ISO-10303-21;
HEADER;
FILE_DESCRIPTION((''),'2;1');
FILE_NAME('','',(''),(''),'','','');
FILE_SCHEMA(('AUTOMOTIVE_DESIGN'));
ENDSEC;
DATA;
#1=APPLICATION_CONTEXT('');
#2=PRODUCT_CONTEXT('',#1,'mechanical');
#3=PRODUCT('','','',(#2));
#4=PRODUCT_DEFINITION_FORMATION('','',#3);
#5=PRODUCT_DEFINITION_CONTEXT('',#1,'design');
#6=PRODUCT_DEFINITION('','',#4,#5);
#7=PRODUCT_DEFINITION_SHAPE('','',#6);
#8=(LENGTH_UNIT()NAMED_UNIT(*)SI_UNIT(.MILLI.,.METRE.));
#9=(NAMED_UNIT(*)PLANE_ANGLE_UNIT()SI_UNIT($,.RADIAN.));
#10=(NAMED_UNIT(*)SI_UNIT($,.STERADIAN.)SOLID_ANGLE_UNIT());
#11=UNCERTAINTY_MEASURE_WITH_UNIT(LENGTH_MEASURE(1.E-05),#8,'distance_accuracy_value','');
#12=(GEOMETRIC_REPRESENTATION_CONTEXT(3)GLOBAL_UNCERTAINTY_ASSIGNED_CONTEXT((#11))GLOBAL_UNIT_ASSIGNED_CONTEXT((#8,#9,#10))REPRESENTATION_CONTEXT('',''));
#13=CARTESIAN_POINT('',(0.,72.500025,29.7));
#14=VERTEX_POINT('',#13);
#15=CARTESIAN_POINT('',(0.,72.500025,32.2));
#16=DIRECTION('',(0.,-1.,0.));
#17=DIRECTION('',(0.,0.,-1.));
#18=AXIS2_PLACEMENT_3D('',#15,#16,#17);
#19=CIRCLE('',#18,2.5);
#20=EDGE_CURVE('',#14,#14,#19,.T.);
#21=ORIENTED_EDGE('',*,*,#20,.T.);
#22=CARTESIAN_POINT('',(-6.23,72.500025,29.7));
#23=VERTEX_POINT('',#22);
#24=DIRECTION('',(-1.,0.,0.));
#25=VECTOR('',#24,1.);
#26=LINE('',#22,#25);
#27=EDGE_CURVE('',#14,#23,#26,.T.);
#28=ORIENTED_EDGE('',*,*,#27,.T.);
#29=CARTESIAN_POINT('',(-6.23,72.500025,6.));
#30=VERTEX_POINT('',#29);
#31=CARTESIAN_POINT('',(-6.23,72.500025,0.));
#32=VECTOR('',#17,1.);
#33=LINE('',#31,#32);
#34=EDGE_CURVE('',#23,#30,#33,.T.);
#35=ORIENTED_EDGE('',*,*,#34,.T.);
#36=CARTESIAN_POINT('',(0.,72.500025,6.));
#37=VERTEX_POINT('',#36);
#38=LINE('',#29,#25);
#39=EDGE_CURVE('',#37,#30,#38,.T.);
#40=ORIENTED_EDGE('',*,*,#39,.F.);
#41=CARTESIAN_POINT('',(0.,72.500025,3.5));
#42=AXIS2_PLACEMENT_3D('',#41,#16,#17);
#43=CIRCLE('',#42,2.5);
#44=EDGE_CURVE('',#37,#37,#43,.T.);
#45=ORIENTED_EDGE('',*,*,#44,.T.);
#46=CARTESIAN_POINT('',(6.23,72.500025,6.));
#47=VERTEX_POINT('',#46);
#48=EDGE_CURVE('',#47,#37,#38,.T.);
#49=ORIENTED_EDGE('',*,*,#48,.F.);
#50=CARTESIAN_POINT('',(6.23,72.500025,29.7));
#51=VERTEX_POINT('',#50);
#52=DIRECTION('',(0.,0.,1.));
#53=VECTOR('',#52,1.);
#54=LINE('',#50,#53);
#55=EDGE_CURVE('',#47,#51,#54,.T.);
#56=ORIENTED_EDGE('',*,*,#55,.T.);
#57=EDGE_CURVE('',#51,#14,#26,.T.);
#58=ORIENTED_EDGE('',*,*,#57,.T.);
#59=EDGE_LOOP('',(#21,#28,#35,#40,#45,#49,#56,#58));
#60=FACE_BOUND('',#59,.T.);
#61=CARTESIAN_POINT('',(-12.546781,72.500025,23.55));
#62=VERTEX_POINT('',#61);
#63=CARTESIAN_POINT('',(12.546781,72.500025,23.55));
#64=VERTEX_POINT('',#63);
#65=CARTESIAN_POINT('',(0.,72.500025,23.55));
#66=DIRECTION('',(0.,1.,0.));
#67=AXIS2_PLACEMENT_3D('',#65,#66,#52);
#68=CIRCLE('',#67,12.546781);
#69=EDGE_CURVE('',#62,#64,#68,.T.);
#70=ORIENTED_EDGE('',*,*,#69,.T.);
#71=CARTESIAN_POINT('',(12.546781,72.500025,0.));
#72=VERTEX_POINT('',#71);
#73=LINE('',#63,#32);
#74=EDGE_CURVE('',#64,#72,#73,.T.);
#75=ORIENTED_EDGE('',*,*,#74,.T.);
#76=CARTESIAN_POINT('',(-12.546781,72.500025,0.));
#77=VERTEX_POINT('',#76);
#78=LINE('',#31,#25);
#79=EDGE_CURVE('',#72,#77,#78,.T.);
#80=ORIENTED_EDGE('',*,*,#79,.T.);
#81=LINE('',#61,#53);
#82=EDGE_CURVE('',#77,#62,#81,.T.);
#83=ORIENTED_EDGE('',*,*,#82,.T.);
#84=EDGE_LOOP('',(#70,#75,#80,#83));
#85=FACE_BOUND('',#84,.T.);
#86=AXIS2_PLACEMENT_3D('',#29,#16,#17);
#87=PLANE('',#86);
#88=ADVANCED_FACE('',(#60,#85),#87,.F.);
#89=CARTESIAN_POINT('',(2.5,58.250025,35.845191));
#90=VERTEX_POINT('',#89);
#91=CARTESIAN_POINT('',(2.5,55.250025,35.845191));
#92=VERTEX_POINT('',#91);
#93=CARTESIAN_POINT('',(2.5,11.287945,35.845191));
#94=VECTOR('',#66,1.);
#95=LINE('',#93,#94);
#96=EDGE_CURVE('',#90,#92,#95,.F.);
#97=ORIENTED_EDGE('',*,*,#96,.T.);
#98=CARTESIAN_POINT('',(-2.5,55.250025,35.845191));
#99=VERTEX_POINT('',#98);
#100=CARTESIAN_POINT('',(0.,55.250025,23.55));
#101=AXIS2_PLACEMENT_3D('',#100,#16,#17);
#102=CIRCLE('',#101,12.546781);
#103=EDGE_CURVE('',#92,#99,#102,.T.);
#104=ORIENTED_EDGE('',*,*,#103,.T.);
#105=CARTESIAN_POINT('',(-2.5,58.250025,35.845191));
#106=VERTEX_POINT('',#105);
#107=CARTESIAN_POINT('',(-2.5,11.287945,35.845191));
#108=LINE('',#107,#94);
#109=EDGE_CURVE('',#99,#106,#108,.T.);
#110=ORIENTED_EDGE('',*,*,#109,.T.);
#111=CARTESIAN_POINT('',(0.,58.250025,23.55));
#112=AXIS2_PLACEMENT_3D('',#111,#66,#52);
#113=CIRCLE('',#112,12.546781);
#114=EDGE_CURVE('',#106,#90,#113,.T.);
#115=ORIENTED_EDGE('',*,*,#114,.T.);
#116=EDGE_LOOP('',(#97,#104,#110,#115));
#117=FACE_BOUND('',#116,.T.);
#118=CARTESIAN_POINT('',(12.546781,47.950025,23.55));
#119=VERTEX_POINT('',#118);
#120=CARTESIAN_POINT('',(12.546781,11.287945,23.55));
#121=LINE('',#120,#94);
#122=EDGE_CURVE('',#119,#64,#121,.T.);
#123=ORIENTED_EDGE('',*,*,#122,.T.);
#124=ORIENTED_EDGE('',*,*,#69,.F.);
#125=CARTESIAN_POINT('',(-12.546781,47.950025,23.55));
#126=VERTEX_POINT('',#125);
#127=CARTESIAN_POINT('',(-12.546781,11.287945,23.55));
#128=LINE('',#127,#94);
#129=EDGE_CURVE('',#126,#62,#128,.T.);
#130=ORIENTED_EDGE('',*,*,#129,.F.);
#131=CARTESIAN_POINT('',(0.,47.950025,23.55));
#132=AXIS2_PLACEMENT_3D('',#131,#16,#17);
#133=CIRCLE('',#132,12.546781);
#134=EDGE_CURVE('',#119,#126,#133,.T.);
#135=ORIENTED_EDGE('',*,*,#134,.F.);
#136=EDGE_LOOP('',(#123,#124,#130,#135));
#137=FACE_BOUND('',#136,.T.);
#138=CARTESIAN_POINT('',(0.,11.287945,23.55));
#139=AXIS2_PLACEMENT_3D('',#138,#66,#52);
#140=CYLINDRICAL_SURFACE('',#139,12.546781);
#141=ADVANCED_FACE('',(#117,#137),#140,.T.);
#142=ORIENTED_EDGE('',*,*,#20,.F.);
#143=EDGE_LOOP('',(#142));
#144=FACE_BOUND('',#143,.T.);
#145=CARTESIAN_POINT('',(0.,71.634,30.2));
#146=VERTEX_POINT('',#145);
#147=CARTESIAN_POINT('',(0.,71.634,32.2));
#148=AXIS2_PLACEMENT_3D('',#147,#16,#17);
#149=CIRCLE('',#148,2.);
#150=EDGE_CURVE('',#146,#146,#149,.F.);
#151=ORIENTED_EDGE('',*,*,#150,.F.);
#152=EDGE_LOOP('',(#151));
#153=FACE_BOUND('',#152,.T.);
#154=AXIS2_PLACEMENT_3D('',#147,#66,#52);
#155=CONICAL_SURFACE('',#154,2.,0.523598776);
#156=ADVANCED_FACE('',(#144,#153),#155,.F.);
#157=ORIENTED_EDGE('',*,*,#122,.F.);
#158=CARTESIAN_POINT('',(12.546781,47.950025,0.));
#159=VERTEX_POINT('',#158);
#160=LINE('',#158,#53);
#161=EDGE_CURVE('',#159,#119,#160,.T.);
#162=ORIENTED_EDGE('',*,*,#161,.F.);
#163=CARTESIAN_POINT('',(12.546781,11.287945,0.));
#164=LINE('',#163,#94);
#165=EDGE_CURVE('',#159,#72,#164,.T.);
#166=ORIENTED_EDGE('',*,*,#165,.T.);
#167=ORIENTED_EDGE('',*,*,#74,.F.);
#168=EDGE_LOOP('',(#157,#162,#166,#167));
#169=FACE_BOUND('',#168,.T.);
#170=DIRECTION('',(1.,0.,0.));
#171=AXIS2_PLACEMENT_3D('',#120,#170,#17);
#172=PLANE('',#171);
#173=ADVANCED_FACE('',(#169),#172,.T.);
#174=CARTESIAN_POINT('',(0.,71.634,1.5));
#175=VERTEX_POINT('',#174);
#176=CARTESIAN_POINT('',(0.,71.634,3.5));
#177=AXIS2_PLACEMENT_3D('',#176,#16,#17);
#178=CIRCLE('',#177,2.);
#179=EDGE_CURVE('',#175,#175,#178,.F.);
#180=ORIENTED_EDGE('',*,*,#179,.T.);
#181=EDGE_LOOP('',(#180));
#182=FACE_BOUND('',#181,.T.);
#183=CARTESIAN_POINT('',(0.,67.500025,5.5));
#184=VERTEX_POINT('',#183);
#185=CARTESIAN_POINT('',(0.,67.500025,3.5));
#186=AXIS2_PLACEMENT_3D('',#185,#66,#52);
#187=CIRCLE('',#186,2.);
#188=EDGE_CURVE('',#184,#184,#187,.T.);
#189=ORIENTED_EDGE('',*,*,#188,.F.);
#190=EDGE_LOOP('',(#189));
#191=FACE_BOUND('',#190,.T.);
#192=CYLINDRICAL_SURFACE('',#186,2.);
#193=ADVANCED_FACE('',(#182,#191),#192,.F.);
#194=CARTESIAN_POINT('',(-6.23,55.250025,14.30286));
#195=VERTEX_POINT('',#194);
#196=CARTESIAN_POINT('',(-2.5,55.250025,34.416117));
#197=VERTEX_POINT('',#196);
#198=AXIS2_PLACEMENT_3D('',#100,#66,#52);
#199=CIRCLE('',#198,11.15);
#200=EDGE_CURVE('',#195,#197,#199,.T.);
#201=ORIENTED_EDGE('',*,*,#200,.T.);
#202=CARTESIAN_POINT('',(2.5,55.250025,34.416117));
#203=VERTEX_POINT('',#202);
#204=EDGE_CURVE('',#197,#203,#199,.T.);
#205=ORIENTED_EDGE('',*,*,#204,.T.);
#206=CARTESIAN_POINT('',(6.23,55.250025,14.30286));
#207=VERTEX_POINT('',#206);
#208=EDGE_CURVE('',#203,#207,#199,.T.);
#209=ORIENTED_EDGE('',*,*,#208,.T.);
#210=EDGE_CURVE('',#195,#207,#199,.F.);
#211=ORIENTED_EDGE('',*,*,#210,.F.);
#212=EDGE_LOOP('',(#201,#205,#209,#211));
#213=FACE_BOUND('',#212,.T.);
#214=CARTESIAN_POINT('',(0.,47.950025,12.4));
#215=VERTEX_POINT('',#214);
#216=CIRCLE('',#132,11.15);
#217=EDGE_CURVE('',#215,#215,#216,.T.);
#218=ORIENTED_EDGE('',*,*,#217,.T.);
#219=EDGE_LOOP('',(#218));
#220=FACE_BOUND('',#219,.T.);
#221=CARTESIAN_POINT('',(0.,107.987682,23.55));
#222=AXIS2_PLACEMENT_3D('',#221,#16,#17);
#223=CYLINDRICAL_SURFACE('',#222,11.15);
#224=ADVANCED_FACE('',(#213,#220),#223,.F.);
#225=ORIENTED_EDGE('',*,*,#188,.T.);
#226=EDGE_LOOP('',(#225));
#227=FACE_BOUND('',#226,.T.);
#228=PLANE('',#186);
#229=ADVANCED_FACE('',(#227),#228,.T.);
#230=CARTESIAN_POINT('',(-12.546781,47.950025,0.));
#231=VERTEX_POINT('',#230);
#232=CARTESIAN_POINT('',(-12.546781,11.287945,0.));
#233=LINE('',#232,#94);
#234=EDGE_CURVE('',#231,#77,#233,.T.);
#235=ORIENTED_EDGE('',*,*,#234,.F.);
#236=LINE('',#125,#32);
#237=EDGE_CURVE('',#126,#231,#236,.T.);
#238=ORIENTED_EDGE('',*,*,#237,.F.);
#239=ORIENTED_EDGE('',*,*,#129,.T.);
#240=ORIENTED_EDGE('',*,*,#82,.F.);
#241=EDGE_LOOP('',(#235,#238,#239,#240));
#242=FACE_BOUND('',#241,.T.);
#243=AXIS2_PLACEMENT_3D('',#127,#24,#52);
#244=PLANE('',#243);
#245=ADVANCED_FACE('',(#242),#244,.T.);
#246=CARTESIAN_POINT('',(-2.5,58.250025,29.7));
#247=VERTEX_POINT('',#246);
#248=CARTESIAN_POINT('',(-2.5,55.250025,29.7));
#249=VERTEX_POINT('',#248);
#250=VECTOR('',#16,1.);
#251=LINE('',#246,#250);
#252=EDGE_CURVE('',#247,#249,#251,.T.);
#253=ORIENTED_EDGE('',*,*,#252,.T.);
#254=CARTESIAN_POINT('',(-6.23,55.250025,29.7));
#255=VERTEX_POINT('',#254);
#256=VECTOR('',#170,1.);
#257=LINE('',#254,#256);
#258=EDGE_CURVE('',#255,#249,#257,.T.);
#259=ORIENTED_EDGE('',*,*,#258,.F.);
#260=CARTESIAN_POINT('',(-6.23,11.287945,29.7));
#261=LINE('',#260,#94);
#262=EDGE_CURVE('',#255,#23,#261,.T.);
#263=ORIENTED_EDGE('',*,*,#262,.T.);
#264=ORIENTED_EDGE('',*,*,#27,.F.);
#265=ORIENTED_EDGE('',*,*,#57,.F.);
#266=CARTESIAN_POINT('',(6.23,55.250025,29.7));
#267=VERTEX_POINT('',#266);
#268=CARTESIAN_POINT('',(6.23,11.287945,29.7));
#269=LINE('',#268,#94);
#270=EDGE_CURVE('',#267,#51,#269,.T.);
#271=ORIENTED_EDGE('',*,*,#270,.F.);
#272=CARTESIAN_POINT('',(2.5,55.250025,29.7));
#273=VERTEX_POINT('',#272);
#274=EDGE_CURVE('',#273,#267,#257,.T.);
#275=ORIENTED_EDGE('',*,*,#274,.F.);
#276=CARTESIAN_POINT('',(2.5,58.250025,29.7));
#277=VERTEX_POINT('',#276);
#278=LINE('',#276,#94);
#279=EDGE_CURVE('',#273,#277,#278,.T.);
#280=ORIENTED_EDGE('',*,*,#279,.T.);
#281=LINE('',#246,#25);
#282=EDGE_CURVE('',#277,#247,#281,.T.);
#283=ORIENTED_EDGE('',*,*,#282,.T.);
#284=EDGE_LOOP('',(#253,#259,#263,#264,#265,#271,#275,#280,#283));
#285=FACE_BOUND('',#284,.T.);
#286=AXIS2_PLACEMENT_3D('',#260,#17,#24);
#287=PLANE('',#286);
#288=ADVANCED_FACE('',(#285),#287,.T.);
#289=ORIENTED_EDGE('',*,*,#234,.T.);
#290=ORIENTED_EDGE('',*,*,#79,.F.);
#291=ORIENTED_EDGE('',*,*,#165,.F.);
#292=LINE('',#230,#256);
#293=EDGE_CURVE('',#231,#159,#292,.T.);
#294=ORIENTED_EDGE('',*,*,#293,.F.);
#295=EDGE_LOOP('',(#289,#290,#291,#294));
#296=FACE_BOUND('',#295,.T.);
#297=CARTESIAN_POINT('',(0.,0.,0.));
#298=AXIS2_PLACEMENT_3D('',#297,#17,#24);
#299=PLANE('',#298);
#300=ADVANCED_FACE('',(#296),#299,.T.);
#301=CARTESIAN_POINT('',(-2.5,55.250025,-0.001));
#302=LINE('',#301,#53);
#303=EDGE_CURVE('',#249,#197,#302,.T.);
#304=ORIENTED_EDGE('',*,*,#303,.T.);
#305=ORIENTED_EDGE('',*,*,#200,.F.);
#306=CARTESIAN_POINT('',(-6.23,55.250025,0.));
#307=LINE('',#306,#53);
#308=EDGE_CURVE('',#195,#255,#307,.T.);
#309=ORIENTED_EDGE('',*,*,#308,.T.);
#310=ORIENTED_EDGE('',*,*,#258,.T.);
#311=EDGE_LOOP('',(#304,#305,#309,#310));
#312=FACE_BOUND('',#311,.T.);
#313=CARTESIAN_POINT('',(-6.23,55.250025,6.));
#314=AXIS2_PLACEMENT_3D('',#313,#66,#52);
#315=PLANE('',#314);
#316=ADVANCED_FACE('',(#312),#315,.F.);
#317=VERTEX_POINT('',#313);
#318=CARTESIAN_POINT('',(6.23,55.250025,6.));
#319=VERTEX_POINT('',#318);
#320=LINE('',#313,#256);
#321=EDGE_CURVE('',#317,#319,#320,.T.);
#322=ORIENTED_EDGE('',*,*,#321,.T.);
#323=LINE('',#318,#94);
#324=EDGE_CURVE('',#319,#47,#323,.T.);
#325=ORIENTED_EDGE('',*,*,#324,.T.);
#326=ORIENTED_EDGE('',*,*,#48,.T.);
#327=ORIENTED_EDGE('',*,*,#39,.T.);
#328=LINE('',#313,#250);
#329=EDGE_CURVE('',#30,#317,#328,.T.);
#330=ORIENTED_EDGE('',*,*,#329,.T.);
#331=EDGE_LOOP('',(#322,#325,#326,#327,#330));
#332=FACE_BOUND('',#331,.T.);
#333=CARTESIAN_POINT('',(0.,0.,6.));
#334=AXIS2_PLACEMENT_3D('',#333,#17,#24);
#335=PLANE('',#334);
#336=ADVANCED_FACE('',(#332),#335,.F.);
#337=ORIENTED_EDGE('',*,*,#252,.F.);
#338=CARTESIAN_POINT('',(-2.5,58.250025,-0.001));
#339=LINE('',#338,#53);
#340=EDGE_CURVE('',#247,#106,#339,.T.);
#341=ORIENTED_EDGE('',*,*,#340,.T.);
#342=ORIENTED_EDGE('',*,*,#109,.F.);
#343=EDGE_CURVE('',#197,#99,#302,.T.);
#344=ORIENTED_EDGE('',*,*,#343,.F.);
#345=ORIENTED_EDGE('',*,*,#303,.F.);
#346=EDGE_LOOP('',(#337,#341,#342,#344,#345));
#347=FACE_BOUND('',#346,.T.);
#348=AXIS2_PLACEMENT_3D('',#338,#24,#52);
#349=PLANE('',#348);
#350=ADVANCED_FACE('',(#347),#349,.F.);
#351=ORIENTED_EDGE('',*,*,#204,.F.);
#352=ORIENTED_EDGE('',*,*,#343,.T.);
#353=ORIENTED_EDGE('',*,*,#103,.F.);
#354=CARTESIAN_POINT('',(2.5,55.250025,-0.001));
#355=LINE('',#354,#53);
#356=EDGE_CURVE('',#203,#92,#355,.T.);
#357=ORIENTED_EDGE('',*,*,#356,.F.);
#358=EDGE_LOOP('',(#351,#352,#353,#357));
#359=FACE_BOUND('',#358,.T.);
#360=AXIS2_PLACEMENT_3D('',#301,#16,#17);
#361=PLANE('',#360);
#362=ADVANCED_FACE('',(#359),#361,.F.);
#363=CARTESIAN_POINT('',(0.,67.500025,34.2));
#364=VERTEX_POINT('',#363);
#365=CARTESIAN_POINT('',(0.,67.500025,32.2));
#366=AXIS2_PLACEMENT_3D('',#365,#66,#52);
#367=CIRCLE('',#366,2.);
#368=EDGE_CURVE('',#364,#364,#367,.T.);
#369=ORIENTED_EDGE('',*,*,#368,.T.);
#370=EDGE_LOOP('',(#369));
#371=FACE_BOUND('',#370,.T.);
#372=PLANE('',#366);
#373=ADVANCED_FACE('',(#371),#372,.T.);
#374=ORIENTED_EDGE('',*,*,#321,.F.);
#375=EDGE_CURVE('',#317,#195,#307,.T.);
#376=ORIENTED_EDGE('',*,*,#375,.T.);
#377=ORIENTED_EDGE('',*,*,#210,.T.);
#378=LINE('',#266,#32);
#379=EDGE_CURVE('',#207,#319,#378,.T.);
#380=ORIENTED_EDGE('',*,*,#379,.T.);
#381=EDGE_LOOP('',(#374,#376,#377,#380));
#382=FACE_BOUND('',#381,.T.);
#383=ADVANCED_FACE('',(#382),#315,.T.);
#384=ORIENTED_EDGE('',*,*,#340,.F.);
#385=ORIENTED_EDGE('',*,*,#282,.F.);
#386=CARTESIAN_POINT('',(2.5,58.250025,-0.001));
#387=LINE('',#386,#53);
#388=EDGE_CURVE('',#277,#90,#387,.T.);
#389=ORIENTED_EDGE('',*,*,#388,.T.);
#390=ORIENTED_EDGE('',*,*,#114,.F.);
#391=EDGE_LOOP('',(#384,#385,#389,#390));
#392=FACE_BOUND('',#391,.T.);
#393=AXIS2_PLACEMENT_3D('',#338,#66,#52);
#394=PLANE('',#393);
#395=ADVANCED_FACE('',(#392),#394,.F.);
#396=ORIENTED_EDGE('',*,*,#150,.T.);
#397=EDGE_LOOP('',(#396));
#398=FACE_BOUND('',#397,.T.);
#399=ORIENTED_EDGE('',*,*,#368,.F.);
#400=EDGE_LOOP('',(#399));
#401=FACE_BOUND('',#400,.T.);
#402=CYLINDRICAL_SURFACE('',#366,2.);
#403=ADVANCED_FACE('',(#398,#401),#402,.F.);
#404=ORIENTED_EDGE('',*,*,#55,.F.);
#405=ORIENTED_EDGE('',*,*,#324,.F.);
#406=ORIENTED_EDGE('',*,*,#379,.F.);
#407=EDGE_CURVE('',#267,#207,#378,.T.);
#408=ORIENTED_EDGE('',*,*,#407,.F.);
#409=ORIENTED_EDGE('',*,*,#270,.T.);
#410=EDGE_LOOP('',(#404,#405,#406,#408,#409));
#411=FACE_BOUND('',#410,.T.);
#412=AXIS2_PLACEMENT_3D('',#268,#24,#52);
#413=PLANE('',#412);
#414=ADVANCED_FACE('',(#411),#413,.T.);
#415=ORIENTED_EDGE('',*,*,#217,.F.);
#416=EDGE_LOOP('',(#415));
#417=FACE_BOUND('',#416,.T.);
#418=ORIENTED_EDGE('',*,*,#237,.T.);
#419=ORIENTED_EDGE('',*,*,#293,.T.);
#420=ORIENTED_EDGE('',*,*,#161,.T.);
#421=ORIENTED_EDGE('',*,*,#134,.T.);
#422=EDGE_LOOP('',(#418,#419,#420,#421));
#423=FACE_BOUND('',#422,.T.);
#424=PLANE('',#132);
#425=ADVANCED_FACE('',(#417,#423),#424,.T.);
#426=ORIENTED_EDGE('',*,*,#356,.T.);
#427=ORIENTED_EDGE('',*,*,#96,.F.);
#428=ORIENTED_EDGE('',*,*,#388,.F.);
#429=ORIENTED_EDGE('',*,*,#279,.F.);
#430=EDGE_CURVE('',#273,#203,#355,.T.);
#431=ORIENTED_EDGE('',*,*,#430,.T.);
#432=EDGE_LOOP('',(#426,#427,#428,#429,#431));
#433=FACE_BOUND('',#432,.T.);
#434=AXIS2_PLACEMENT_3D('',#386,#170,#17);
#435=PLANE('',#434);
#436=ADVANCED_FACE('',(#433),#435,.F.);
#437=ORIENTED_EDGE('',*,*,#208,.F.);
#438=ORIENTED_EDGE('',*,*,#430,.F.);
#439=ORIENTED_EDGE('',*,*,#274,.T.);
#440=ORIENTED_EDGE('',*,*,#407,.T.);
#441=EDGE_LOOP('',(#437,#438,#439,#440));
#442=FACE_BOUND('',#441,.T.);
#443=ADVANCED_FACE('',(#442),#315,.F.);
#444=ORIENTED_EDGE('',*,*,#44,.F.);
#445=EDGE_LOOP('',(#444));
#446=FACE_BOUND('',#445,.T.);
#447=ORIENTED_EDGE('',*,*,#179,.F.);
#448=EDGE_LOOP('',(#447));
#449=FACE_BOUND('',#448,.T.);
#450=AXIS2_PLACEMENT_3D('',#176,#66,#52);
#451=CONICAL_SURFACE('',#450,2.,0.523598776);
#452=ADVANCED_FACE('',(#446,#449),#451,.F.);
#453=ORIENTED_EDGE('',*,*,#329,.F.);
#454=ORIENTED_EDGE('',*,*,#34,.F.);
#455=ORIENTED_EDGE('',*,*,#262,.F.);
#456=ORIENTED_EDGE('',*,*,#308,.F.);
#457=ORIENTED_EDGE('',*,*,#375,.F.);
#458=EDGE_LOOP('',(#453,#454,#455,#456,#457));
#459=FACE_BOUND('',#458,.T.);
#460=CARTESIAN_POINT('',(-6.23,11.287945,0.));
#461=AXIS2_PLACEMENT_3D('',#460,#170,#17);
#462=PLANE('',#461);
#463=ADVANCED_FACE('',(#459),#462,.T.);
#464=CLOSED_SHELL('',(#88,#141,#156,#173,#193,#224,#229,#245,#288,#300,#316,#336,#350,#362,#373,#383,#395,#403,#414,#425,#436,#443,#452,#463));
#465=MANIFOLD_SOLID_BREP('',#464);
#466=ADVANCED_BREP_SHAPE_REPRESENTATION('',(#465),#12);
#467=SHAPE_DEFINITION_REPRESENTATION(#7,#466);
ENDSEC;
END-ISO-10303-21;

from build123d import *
from OCP.BRepFilletAPI import BRepFilletAPI_MakeChamfer

# Parameters (mm, degrees)
SKETCH4_W                = 12.46
SKETCH4_H                = 17.25
BOSS_EXTRUDE3_DEPTH      = 6
BOSS_EXTRUDE6_DEPTH      = 7.3
BOSS_EXTRUDE6_DEPTH_BACK = 17.25
SKETCH8_R                = 12.546781182
SKETCH8_R_2              = 11.15
BOSS_EXTRUDE4_DEPTH      = 17.25
SKETCH6_R                = 2
CUT_EXTRUDE1_DEPTH       = 5
CHAMFER1_SIZE            = 0.5
CHAMFER1_SIZE_2          = 0.866025404
SKETCH10_W               = 12.46
SKETCH10_H               = 23.7
CUT_EXTRUDE3_DEPTH       = 17.25
CUT_EXTRUDE4_REACH       = 83.955
SKETCH11_W               = 5
SKETCH11_H               = 3
BOSS_EXTRUDE7_START      = -7.3
BOSS_EXTRUDE7_DEPTH      = 7.3


with BuildPart() as part:
    # Sketch4 → Boss-Extrude3 (new body)
    with BuildSketch(Plane.XY):
        with Locations((0, 63.875025481)):
            Rectangle(SKETCH4_W, SKETCH4_H)
    extrude(amount=BOSS_EXTRUDE3_DEPTH)



with BuildPart() as body_2:
    # Sketch8 → Boss-Extrude6 (new, two sides: drawn at the far end of the back side and taken through both)
    with BuildSketch(Plane(origin=(0, 55.250025481, 0), x_dir=(-1, 0, 0), z_dir=(0, -1, 0)).offset(-BOSS_EXTRUDE6_DEPTH_BACK)):
        with Locations(Location((0, -23.55, 0), (0, 0, 90))):
            Circle(SKETCH8_R)
        with Locations(Location((0, -23.55, 0), (0, 0, 90))):
            Circle(SKETCH8_R_2, mode=Mode.SUBTRACT)
    extrude(amount=BOSS_EXTRUDE6_DEPTH + BOSS_EXTRUDE6_DEPTH_BACK)


with BuildPart() as part_1:
    add(part.part)

    add(body_2.part)  # Boss-Extrude4 merges body 2
    # Sketch5 → Boss-Extrude4 (add)
    with BuildSketch(Plane(origin=(0, 72.500025481, 0), x_dir=(1, 0, 0), z_dir=(0, 1, 0))):
        with BuildLine():
            Line((12.546781182, -23.55), (12.546781182, 0))
            Line((12.546781182, 0), (6.23, 0))
            Line((6.23, 0), (6.23, -29.7))
            Line((6.23, -29.7), (-6.23, -29.7))
            Line((-6.23, -29.7), (-6.23, 0))
            Line((-6.23, 0), (-12.546781182, 0))
            Line((-12.546781182, 0), (-12.546781182, -23.55))
            ThreePointArc((-12.546781182, -23.55), (0, -36.096781182), (12.546781182, -23.55))
        make_face()
    extrude(amount=-BOSS_EXTRUDE4_DEPTH)

    # Sketch6 → Cut-Extrude1 (cut)
    with BuildSketch(Plane(origin=(0, 72.500025481, 0), x_dir=(1, 0, 0), z_dir=(0, 1, 0))):
        with Locations(Location((0, -3.5, 0), (0, 0, 270))):
            Circle(SKETCH6_R)
        with Locations(Location((0, -32.2, 0), (0, 0, 270))):
            Circle(SKETCH6_R)
    extrude(amount=-CUT_EXTRUDE1_DEPTH, mode=Mode.SUBTRACT)

    # Chamfer1
    chamfer1_edges_1 = [part_1.edges().sort_by_distance(p)[0] for p in [
        (0, 72.500025481, 1.5),
    ]]
    chamfer1_side_1 = [part_1.faces().sort_by_distance(p)[0] for p in [
        (0, 72.500025481, 1.49),
    ]]
    chamfer1_edges_2 = [part_1.edges().sort_by_distance(p)[0] for p in [
        (0, 72.500025481, 30.2),
    ]]
    chamfer1_side_2 = [part_1.faces().sort_by_distance(p)[0] for p in [
        (0, 72.500025481, 30.19),
    ]]
    chamfer1 = BRepFilletAPI_MakeChamfer(part_1.part.solid().wrapped)
    for e in chamfer1_edges_1:
        chamfer1.Add(CHAMFER1_SIZE - 0.0001, CHAMFER1_SIZE_2 - 0.0001, e.wrapped, chamfer1_side_1[0].wrapped)
    for e in chamfer1_edges_2:
        chamfer1.Add(CHAMFER1_SIZE - 0.0001, CHAMFER1_SIZE_2 - 0.0001, e.wrapped, chamfer1_side_2[0].wrapped)
    add(Compound.cast(chamfer1.Shape()), mode=Mode.REPLACE)  # a hair under: the kernel refuses the full size

    # Sketch10 → Cut-Extrude3 (cut)
    with BuildSketch(Plane(origin=(0, 72.500025481, 0), x_dir=(1, 0, 0), z_dir=(0, 1, 0))):
        with Locations((0, -17.85)):
            Rectangle(SKETCH10_W, SKETCH10_H)
    extrude(amount=-CUT_EXTRUDE3_DEPTH, mode=Mode.SUBTRACT)

    # Sketch11 → Cut-Extrude4 (cut, up to next)
    with BuildSketch(Plane.XY.offset(36.096781182), mode=Mode.PRIVATE) as cut_extrude4_sk1:
        with Locations((0, 56.750025481)):
            Rectangle(SKETCH11_W, SKETCH11_H)
    cut_extrude4_tool1 = extrude(cut_extrude4_sk1.sketch, amount=-CUT_EXTRUDE4_REACH, mode=Mode.PRIVATE) & part_1.part
    add(cut_extrude4_tool1.solids().sort_by_distance((0, 56.750025, 36.096781))[0], mode=Mode.SUBTRACT)

    # Sketch13 → Boss-Extrude7 (add)
    with BuildSketch(Plane.XZ.offset(-47.950025481).offset(BOSS_EXTRUDE7_START)):
        with BuildLine():
            Line((-12.546781182, 23.55), (-12.546781182, 0))
            Line((-12.546781182, 0), (12.546781182, 0))
            Line((12.546781182, 0), (12.546781182, 23.55))
            ThreePointArc((12.546781182, 23.55), (0, 11.003218818), (-12.546781182, 23.55))
        make_face()
    extrude(amount=BOSS_EXTRUDE7_DEPTH)


solid = part_1.part
